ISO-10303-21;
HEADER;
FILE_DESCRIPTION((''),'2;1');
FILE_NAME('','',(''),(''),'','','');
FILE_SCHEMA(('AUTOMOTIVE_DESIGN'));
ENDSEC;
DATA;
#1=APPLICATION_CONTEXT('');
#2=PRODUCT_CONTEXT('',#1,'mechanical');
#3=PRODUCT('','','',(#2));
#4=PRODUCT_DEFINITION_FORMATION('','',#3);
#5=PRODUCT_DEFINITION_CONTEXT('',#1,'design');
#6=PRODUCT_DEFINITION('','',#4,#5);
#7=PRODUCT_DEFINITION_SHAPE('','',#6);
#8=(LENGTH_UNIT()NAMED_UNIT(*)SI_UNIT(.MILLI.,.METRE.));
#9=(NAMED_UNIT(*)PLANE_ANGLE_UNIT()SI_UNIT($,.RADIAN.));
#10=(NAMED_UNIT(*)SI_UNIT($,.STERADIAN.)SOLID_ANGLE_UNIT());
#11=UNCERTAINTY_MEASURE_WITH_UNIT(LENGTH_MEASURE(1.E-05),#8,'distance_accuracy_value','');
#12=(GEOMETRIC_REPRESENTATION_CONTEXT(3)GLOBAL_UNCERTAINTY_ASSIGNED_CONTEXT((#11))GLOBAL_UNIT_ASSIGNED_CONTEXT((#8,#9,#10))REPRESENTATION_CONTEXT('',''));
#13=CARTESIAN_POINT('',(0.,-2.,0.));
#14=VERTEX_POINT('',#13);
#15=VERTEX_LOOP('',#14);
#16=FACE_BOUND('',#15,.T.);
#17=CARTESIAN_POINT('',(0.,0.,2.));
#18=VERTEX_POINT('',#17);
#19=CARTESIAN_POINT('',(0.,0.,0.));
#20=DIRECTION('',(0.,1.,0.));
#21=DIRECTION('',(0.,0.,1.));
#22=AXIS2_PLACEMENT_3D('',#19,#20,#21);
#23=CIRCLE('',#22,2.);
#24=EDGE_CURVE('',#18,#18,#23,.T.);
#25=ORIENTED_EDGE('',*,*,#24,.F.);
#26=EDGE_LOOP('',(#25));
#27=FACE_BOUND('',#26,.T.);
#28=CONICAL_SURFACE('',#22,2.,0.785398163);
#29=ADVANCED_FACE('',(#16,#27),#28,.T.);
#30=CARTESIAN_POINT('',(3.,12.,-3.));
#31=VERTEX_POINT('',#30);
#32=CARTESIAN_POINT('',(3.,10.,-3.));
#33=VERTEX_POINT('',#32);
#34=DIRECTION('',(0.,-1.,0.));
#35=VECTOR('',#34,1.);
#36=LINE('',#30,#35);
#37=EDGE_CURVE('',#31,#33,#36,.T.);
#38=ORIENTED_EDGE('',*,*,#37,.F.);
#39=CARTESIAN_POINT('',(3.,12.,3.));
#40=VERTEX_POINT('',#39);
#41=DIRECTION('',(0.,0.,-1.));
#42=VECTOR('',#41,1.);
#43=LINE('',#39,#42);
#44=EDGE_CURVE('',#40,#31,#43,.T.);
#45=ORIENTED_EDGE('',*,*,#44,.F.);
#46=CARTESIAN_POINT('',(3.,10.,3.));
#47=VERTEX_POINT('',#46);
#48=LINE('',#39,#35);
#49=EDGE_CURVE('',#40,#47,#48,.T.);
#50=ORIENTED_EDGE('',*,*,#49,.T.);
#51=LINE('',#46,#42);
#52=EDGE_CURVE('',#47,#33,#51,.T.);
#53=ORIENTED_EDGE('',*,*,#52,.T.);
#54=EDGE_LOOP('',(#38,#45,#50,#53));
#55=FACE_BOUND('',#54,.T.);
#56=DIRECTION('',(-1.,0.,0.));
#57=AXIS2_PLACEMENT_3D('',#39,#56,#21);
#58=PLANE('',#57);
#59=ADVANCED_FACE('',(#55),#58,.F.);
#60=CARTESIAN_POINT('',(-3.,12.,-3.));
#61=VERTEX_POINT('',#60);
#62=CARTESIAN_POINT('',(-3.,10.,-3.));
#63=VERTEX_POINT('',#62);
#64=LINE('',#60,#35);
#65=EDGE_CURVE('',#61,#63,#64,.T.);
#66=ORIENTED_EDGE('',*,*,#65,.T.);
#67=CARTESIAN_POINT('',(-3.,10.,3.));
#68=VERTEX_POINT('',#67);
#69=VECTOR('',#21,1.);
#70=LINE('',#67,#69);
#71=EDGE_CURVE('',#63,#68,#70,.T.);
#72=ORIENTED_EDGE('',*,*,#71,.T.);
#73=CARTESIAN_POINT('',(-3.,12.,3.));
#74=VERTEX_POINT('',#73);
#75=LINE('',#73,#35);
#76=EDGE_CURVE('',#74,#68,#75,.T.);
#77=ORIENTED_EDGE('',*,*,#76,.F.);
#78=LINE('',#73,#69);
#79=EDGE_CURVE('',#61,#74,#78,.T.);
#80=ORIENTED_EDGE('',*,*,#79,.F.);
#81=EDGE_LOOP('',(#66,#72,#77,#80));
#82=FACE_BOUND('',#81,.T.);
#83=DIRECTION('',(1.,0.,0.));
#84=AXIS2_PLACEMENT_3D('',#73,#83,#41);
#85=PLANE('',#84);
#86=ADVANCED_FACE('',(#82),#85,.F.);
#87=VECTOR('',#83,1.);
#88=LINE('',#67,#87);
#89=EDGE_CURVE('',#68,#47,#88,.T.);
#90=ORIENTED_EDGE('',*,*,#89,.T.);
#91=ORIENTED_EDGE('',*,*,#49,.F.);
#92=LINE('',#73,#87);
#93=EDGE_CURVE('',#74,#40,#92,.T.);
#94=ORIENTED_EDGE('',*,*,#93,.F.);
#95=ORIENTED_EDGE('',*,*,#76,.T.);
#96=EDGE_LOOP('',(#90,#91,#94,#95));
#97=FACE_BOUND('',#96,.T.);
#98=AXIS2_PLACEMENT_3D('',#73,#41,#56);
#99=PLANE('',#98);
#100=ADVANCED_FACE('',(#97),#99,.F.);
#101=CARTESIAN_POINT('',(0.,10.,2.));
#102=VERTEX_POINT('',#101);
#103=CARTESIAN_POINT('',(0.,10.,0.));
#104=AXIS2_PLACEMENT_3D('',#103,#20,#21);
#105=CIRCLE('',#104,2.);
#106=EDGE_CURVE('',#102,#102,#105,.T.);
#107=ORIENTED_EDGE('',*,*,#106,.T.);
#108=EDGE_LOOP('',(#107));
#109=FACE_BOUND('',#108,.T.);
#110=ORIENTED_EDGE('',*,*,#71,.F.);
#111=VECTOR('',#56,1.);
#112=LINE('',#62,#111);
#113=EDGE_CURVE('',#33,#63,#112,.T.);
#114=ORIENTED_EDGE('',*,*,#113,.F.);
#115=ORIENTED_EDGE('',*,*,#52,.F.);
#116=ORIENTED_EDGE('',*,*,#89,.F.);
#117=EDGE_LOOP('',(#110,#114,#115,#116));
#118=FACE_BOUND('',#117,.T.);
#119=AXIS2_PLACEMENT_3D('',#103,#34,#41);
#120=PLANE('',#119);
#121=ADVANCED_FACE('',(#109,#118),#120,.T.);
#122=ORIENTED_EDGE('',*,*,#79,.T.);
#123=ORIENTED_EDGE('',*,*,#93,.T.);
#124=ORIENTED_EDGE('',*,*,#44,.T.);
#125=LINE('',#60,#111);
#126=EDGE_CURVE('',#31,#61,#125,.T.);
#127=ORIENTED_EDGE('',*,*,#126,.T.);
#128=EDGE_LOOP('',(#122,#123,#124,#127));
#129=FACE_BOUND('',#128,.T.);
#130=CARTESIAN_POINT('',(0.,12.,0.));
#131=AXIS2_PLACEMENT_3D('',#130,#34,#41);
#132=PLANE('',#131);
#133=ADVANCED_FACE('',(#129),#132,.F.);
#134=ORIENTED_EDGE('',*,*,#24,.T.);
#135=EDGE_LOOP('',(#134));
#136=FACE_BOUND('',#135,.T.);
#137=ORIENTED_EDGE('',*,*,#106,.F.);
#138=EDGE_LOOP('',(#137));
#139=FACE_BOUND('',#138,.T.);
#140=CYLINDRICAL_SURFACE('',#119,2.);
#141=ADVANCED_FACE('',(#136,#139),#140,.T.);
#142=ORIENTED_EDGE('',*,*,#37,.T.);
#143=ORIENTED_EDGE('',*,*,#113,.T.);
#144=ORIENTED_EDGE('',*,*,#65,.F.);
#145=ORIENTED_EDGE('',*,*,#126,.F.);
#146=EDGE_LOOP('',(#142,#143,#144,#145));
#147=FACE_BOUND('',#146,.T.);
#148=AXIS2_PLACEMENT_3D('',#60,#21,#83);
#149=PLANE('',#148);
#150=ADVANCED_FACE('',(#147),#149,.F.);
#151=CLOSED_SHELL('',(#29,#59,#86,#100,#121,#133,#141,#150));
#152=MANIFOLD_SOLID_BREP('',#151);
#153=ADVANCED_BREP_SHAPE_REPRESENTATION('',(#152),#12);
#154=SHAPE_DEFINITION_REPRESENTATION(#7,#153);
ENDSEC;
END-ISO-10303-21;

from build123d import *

# Parameters (mm, degrees)
CROQUIS2_W              = 6
CROQUIS2_H              = 6
SALIENTE_EXTRUIR2_DEPTH = 2


# Read off the part's stored shape, not the designer's step: Saliente-Extruir1
with BuildPart() as part:
    # Saliente-Extruir1 outline → Saliente-Extruir1 (revolve)
    with BuildSketch(Plane.XY):
        Polygon((0, 10), (0, -2), (2, 0), (2, 10), align=None)
    revolve(axis=Axis((0, 0, 0), (0, 1, 0)))

    # Croquis2 → Saliente-Extruir2 (add)
    with BuildSketch(Plane(origin=(0, 10, 0), x_dir=(1, 0, 0), z_dir=(0, 1, 0))):
        Rectangle(CROQUIS2_W, CROQUIS2_H)
    extrude(amount=SALIENTE_EXTRUIR2_DEPTH)


solid = part.part
